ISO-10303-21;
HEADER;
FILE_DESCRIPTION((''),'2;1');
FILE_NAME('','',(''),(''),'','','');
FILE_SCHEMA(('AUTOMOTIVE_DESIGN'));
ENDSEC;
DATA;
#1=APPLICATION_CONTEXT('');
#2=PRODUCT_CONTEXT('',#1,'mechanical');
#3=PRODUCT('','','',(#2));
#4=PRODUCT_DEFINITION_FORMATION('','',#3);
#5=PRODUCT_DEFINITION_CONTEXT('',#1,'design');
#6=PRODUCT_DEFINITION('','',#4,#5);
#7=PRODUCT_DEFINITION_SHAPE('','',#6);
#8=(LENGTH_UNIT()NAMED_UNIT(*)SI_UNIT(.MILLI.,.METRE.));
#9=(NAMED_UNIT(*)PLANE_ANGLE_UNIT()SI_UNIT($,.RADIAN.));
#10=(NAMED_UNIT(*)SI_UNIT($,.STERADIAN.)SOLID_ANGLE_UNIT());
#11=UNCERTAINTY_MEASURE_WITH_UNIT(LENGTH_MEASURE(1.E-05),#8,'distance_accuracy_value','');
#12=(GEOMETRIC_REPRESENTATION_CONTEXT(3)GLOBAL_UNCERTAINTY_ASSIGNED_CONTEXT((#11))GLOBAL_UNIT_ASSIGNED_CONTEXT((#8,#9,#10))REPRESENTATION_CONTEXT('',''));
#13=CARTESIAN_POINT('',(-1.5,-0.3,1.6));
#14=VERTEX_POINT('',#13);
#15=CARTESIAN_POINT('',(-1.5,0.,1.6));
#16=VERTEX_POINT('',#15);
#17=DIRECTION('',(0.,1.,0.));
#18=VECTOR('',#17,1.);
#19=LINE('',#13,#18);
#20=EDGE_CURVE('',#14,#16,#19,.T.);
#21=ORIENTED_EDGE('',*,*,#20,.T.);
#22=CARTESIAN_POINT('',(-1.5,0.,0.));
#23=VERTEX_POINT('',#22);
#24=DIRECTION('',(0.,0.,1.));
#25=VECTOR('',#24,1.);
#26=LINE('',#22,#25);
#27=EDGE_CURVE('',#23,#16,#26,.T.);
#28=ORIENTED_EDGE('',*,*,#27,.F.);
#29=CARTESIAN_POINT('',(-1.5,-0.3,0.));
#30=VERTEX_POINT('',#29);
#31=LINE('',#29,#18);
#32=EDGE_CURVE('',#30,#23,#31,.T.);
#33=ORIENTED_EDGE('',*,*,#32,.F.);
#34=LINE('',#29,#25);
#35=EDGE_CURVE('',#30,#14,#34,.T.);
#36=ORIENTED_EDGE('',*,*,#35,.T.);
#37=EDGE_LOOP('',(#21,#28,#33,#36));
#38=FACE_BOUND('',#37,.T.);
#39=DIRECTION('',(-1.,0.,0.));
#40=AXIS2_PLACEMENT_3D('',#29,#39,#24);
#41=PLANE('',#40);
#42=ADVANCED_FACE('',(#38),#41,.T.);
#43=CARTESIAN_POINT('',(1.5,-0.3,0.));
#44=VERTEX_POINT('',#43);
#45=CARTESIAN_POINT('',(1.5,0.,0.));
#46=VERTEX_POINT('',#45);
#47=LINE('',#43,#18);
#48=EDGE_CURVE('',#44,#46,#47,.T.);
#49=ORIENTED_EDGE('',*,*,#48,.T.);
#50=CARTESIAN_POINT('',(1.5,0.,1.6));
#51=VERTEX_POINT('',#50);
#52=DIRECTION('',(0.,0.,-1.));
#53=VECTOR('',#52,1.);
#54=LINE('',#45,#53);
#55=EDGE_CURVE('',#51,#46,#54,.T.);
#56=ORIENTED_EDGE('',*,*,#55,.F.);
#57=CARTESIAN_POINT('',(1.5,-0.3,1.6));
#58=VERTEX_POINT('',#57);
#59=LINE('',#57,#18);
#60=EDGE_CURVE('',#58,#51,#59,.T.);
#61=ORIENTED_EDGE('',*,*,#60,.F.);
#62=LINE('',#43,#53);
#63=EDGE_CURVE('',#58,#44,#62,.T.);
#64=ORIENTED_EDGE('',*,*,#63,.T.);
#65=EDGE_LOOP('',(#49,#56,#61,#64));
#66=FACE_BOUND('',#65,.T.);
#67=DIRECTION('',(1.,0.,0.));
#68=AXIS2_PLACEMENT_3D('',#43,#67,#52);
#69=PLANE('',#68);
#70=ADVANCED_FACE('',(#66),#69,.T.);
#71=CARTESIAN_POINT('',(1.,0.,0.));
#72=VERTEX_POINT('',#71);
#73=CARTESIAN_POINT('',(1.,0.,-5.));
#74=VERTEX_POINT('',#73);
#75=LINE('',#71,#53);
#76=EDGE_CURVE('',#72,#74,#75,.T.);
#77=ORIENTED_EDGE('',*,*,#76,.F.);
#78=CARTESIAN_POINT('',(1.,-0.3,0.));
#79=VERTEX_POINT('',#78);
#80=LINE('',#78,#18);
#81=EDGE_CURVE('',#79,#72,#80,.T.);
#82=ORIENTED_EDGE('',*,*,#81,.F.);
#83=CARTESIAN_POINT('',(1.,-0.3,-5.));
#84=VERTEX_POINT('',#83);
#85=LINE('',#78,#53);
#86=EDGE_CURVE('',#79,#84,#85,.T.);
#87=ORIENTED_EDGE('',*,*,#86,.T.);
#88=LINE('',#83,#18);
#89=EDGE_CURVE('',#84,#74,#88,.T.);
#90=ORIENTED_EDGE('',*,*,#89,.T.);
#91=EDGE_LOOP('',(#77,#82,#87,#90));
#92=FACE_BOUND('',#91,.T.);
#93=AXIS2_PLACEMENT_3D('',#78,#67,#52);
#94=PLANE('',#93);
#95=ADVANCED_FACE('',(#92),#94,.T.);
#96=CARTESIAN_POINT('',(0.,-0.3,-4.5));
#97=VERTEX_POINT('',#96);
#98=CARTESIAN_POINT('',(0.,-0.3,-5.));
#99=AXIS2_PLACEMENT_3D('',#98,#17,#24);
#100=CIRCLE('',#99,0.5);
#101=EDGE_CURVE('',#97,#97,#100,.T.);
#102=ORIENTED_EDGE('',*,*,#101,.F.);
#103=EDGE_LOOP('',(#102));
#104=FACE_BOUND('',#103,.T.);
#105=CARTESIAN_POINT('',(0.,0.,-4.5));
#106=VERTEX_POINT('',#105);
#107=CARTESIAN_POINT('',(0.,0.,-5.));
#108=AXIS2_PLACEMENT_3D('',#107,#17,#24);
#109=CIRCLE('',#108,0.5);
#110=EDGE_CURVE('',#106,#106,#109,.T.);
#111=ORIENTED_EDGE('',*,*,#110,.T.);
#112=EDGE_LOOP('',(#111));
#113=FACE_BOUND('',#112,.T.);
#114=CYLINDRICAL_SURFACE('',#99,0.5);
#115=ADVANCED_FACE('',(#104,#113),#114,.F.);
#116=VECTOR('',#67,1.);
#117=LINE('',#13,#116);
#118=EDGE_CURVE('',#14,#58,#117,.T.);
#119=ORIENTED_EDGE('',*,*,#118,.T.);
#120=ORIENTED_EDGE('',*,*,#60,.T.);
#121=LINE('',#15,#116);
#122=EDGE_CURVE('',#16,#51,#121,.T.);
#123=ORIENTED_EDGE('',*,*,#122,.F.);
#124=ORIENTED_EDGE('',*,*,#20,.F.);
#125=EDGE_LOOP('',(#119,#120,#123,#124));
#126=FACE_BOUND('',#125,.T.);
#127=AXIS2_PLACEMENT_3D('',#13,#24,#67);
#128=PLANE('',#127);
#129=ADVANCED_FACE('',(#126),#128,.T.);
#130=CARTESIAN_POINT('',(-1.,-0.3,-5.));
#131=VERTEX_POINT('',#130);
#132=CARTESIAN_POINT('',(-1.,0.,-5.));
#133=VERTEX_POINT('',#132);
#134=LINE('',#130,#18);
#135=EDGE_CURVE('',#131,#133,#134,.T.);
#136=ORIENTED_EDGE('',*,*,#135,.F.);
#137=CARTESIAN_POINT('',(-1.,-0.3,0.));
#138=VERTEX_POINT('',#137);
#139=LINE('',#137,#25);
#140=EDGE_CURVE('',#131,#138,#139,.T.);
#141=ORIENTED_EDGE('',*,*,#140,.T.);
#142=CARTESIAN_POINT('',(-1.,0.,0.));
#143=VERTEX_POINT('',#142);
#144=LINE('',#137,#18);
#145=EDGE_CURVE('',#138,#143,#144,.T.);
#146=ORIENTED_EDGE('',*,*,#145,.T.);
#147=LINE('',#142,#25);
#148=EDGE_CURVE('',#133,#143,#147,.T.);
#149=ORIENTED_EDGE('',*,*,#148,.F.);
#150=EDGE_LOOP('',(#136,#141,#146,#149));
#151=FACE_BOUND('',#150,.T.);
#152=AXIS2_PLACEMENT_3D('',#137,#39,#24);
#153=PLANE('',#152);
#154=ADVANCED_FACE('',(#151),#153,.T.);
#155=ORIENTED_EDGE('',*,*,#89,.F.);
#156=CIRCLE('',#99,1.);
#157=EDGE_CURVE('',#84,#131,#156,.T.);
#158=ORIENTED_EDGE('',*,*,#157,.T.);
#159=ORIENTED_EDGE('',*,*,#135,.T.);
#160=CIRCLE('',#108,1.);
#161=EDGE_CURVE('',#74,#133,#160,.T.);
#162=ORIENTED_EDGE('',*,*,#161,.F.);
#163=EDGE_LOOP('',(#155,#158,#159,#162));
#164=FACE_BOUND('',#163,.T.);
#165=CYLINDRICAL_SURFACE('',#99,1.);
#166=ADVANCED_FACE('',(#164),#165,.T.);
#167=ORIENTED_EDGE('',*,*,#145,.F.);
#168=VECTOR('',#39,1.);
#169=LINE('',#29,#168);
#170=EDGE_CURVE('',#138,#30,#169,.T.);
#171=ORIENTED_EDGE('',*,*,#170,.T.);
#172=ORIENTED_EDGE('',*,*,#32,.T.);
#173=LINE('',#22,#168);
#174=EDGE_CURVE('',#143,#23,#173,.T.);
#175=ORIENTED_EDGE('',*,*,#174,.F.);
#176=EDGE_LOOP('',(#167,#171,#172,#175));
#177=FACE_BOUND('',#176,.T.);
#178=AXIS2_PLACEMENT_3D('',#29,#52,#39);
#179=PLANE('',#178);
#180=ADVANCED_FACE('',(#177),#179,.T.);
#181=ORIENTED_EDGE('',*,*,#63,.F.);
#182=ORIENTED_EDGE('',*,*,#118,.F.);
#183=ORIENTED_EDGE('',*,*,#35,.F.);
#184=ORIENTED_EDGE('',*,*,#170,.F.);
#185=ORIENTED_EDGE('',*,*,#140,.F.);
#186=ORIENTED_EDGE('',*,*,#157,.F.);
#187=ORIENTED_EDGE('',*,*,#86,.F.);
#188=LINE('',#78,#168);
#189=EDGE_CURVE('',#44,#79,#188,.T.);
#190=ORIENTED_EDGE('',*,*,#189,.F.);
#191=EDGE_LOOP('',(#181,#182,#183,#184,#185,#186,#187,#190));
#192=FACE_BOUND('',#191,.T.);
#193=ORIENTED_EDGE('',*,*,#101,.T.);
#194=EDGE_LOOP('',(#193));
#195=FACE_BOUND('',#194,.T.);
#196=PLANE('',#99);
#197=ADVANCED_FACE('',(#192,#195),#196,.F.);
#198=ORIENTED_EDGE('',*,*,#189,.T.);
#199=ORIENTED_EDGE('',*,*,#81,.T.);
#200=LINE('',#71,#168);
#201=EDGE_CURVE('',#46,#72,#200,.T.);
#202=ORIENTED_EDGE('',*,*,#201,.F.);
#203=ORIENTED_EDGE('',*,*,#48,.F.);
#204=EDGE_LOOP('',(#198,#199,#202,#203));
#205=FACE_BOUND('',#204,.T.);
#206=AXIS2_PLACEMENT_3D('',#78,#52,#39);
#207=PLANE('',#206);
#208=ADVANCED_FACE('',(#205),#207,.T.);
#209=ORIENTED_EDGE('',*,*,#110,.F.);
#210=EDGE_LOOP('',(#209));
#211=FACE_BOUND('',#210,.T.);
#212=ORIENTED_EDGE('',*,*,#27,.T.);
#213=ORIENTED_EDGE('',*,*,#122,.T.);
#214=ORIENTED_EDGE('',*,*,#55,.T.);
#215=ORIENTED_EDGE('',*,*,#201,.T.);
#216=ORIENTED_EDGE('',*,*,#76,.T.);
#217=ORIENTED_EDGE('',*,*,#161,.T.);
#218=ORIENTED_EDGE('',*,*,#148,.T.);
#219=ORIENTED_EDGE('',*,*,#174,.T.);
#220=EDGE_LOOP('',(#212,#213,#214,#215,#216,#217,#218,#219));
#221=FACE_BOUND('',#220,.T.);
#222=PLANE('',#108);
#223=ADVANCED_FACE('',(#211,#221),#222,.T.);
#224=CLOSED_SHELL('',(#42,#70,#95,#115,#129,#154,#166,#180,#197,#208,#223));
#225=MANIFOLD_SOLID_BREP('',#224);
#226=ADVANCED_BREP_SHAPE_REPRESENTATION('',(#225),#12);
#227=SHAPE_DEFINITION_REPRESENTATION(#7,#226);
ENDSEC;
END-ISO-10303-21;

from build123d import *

# Parameters (mm, degrees)
SKETCH1_R          = 0.5
BASE_FLANGE1_DEPTH = 0.3


# Sheet-metal steps are written as plain solids
with BuildPart() as part:
    # Sketch1 → Base-Flange1 (new body)
    with BuildSketch(Plane(origin=(0, 0, 0), x_dir=(1, 0, 0), z_dir=(0, 1, 0))):
        with BuildLine():
            Line((-1, 0), (-1, 5))
            ThreePointArc((-1, 5), (0, 6), (1, 5))
            Line((1, 5), (1, 0))
            Line((1, 0), (1.5, 0))
            Line((1.5, 0), (1.5, -1.6))
            Line((1.5, -1.6), (-1.5, -1.6))
            Line((-1.5, -1.6), (-1.5, 0))
            Line((-1.5, 0), (-1, 0))
        make_face()
        with Locations(Location((0, 5, 0), (0, 0, 270))):
            Circle(SKETCH1_R, mode=Mode.SUBTRACT)
    extrude(amount=-BASE_FLANGE1_DEPTH)


solid = part.part
